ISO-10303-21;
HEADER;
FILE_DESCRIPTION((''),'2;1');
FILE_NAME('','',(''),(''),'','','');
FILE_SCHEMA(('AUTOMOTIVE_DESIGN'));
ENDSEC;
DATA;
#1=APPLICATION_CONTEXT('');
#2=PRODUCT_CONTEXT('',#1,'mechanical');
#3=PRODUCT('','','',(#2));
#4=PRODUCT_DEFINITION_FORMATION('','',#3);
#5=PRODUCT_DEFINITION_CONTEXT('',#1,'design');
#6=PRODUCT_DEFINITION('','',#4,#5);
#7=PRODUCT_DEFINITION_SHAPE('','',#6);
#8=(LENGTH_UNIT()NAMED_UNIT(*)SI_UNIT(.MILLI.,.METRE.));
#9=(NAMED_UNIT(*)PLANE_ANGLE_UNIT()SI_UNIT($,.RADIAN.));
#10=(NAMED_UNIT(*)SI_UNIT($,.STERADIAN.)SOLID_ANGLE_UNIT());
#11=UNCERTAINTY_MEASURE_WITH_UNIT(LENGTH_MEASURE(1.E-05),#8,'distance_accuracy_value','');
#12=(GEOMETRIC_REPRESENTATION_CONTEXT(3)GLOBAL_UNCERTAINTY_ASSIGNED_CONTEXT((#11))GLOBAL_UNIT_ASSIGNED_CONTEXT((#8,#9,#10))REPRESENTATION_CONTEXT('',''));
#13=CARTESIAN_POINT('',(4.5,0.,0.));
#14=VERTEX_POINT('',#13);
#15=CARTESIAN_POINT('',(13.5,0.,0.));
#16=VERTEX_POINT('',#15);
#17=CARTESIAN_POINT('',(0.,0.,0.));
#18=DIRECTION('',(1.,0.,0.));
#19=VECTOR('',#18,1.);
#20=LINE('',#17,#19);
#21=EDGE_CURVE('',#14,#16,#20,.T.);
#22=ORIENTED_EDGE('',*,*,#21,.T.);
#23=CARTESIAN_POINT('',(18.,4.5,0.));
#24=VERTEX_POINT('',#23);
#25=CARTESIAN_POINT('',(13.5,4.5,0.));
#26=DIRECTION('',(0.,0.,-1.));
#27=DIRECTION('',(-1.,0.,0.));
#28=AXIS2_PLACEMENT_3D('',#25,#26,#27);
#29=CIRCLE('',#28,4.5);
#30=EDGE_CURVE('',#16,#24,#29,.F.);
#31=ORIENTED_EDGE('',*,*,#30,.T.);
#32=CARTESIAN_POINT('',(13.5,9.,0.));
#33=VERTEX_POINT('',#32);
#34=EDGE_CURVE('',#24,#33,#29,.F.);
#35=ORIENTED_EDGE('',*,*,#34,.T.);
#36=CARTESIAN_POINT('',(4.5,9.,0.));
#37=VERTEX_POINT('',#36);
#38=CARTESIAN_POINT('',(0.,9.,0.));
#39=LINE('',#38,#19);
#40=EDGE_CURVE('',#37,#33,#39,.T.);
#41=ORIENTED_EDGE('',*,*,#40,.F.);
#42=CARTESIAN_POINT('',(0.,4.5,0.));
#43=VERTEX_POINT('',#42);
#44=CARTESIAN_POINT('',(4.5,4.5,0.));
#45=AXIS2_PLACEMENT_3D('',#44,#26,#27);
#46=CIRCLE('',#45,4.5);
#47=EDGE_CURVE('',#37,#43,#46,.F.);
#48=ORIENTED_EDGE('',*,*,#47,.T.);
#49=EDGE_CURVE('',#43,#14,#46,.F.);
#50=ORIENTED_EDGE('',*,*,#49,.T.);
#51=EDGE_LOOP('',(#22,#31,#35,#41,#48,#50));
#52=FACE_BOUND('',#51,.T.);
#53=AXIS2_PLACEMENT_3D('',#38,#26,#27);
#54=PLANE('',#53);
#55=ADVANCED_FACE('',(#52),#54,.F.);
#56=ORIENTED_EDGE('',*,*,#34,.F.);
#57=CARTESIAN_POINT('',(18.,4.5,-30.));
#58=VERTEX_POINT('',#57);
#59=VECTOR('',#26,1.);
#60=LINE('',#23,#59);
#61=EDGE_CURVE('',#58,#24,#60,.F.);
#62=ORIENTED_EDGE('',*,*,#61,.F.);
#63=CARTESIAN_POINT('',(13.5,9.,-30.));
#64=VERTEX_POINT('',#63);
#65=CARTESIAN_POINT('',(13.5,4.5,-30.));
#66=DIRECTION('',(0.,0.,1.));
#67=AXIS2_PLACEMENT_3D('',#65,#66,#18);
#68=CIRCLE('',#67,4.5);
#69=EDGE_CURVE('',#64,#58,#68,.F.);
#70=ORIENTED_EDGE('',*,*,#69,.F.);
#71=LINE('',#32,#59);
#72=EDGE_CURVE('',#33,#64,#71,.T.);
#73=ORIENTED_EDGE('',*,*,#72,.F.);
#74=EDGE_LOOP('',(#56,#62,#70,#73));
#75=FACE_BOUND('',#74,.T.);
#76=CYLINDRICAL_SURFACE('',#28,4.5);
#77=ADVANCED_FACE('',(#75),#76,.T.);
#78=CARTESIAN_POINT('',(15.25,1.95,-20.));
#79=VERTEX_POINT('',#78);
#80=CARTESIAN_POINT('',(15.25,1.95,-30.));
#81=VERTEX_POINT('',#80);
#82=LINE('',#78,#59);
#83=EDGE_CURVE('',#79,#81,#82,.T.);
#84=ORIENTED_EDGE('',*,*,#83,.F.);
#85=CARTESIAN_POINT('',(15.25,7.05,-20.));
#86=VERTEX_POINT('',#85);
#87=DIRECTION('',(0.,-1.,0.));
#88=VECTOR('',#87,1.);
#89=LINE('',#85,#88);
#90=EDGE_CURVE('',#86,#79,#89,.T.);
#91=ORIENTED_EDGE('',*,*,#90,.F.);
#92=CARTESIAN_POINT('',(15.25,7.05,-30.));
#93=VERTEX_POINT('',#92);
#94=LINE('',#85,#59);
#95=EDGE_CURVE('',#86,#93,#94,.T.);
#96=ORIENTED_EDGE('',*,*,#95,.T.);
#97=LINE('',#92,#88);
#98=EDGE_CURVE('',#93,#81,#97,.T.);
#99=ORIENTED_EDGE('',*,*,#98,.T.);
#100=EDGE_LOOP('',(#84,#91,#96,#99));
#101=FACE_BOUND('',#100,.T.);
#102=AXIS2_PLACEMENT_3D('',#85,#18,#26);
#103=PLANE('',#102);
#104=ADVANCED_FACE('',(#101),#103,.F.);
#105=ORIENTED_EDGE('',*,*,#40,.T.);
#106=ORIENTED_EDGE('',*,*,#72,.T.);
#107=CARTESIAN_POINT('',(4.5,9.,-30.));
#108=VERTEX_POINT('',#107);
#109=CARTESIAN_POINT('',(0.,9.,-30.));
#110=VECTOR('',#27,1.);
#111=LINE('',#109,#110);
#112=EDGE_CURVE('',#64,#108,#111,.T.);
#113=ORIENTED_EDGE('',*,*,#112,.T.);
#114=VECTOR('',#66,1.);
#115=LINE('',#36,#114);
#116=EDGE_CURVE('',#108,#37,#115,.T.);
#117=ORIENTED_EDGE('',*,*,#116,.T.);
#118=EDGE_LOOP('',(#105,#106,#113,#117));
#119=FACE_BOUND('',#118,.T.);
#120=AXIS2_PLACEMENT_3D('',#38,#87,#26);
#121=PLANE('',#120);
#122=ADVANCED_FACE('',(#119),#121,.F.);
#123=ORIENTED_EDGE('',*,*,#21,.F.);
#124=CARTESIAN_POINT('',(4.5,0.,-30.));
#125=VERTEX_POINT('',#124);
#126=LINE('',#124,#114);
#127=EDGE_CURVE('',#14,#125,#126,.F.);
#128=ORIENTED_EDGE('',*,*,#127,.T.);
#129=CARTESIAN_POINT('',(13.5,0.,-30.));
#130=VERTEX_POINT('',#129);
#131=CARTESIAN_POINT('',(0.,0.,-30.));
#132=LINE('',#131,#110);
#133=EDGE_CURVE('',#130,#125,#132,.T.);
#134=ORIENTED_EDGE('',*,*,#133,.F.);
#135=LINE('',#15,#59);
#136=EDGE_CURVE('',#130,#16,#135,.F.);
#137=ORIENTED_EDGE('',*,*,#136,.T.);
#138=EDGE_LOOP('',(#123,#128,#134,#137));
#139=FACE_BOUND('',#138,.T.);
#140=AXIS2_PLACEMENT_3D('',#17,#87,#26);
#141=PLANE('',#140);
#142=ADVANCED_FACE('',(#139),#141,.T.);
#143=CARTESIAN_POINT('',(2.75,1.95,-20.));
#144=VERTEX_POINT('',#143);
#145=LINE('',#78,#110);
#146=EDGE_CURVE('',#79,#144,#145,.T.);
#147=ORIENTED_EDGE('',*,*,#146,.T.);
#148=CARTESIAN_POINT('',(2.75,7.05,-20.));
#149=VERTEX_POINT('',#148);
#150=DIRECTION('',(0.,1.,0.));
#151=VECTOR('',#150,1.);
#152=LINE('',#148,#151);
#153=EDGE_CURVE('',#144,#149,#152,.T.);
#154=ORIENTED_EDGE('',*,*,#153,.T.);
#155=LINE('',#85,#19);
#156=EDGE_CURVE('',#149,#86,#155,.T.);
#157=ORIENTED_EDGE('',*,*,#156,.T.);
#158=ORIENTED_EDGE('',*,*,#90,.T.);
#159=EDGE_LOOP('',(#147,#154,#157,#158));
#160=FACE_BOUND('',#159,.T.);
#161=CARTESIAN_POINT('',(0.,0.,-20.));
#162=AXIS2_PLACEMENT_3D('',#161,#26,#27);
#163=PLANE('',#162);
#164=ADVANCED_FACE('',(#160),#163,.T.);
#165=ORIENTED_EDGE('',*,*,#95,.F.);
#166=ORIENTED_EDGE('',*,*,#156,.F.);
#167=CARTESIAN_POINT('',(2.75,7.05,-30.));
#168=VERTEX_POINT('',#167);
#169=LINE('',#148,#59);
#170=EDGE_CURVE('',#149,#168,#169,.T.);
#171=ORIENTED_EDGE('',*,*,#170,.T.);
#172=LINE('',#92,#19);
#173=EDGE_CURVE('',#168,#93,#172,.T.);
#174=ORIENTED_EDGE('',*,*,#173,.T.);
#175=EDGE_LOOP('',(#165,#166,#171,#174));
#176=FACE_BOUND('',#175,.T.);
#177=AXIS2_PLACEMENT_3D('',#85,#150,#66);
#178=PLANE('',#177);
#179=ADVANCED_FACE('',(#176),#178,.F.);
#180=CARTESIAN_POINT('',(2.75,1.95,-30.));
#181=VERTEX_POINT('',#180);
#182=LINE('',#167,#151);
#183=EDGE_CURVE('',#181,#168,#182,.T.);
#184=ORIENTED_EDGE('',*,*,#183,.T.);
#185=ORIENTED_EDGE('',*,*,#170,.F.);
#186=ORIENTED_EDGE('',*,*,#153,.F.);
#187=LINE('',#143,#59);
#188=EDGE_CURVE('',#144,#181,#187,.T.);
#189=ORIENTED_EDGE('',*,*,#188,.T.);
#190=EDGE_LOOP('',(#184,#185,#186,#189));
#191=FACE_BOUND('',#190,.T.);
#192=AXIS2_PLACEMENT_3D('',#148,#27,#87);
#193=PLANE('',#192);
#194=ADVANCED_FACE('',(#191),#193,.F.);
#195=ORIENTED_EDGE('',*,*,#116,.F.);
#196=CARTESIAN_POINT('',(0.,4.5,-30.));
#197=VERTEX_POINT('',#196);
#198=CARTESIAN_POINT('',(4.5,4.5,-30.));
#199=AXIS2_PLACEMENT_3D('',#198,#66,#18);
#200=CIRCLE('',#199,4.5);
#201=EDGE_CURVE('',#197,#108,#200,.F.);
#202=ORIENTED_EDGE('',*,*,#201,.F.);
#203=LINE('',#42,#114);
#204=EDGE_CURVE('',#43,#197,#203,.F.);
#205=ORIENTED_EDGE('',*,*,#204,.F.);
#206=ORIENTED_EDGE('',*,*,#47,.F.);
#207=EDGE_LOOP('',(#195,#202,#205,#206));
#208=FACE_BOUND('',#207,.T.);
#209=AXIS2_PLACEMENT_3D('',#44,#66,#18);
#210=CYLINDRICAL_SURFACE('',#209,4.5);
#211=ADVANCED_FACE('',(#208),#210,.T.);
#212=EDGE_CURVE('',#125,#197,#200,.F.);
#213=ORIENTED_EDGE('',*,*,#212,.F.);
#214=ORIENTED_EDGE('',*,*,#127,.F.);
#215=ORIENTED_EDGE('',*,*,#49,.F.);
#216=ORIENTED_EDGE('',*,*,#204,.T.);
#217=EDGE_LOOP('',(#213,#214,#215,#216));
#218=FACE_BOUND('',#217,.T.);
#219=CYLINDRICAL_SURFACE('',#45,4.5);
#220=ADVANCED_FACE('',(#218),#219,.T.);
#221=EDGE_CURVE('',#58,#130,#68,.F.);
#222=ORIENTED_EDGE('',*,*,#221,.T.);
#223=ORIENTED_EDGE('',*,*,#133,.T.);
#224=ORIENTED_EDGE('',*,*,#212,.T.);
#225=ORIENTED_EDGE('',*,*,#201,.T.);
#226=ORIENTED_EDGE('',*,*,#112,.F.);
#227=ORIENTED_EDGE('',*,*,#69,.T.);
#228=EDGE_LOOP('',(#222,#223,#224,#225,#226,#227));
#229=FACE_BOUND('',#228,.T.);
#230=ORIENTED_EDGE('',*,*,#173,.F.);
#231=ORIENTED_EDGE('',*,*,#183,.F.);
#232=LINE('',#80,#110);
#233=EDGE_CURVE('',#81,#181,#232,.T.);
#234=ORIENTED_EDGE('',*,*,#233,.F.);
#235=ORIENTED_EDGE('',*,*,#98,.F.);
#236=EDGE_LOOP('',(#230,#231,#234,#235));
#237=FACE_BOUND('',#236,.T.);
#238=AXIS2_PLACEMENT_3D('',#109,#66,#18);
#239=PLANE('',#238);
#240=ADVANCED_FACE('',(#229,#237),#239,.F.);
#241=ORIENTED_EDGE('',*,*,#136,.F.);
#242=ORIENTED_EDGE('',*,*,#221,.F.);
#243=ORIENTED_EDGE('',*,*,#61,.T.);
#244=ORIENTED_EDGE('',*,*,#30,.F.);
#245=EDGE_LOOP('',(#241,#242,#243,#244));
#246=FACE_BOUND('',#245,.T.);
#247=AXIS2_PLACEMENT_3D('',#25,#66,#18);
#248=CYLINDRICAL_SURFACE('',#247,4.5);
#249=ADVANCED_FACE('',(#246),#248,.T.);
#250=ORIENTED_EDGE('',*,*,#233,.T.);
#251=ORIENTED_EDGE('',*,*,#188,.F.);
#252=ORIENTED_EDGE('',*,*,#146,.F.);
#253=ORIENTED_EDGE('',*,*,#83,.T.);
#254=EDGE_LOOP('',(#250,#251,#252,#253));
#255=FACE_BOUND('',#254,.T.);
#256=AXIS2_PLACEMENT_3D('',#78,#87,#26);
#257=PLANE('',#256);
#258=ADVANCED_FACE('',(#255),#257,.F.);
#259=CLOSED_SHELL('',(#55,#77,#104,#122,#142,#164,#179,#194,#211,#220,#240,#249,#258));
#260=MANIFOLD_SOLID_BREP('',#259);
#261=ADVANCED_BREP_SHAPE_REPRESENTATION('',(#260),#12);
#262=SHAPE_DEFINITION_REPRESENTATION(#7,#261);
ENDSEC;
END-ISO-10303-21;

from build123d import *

# Parameters (mm, degrees)
SKETCH1_W           = 18
SKETCH1_H           = 30
BOSS_EXTRUDE1_DEPTH = 9
SKETCH2_W           = 12.5
SKETCH2_H           = 5.1
CUT_EXTRUDE1_DEPTH  = 10
FILLET1_R           = 4.5


with BuildPart() as part:
    # Sketch1 → Boss-Extrude1 (new body)
    with BuildSketch(Plane(origin=(0, 0, 0), x_dir=(1, 0, 0), z_dir=(0, 1, 0))):
        with Locations((9, 15)):
            Rectangle(SKETCH1_W, SKETCH1_H)
    extrude(amount=BOSS_EXTRUDE1_DEPTH)

    # Sketch2 → Cut-Extrude1 (cut)
    with BuildSketch(Plane(origin=(0, 0, -30), x_dir=(-1, 0, 0), z_dir=(0, 0, -1))):
        with Locations((-9, 4.5)):
            Rectangle(SKETCH2_W, SKETCH2_H)
    extrude(amount=-CUT_EXTRUDE1_DEPTH, mode=Mode.SUBTRACT)

    # Fillet1
    fillet1_edges = [part.edges().sort_by_distance(p)[0] for p in [
        (0, 0, -15),
        (0, 9, -15),
        (18, 0, -15),
        (18, 9, -15),
    ]]
    fillet(fillet1_edges, radius=FILLET1_R - 0.0001)  # a hair under: the kernel refuses the full size


solid = part.part
